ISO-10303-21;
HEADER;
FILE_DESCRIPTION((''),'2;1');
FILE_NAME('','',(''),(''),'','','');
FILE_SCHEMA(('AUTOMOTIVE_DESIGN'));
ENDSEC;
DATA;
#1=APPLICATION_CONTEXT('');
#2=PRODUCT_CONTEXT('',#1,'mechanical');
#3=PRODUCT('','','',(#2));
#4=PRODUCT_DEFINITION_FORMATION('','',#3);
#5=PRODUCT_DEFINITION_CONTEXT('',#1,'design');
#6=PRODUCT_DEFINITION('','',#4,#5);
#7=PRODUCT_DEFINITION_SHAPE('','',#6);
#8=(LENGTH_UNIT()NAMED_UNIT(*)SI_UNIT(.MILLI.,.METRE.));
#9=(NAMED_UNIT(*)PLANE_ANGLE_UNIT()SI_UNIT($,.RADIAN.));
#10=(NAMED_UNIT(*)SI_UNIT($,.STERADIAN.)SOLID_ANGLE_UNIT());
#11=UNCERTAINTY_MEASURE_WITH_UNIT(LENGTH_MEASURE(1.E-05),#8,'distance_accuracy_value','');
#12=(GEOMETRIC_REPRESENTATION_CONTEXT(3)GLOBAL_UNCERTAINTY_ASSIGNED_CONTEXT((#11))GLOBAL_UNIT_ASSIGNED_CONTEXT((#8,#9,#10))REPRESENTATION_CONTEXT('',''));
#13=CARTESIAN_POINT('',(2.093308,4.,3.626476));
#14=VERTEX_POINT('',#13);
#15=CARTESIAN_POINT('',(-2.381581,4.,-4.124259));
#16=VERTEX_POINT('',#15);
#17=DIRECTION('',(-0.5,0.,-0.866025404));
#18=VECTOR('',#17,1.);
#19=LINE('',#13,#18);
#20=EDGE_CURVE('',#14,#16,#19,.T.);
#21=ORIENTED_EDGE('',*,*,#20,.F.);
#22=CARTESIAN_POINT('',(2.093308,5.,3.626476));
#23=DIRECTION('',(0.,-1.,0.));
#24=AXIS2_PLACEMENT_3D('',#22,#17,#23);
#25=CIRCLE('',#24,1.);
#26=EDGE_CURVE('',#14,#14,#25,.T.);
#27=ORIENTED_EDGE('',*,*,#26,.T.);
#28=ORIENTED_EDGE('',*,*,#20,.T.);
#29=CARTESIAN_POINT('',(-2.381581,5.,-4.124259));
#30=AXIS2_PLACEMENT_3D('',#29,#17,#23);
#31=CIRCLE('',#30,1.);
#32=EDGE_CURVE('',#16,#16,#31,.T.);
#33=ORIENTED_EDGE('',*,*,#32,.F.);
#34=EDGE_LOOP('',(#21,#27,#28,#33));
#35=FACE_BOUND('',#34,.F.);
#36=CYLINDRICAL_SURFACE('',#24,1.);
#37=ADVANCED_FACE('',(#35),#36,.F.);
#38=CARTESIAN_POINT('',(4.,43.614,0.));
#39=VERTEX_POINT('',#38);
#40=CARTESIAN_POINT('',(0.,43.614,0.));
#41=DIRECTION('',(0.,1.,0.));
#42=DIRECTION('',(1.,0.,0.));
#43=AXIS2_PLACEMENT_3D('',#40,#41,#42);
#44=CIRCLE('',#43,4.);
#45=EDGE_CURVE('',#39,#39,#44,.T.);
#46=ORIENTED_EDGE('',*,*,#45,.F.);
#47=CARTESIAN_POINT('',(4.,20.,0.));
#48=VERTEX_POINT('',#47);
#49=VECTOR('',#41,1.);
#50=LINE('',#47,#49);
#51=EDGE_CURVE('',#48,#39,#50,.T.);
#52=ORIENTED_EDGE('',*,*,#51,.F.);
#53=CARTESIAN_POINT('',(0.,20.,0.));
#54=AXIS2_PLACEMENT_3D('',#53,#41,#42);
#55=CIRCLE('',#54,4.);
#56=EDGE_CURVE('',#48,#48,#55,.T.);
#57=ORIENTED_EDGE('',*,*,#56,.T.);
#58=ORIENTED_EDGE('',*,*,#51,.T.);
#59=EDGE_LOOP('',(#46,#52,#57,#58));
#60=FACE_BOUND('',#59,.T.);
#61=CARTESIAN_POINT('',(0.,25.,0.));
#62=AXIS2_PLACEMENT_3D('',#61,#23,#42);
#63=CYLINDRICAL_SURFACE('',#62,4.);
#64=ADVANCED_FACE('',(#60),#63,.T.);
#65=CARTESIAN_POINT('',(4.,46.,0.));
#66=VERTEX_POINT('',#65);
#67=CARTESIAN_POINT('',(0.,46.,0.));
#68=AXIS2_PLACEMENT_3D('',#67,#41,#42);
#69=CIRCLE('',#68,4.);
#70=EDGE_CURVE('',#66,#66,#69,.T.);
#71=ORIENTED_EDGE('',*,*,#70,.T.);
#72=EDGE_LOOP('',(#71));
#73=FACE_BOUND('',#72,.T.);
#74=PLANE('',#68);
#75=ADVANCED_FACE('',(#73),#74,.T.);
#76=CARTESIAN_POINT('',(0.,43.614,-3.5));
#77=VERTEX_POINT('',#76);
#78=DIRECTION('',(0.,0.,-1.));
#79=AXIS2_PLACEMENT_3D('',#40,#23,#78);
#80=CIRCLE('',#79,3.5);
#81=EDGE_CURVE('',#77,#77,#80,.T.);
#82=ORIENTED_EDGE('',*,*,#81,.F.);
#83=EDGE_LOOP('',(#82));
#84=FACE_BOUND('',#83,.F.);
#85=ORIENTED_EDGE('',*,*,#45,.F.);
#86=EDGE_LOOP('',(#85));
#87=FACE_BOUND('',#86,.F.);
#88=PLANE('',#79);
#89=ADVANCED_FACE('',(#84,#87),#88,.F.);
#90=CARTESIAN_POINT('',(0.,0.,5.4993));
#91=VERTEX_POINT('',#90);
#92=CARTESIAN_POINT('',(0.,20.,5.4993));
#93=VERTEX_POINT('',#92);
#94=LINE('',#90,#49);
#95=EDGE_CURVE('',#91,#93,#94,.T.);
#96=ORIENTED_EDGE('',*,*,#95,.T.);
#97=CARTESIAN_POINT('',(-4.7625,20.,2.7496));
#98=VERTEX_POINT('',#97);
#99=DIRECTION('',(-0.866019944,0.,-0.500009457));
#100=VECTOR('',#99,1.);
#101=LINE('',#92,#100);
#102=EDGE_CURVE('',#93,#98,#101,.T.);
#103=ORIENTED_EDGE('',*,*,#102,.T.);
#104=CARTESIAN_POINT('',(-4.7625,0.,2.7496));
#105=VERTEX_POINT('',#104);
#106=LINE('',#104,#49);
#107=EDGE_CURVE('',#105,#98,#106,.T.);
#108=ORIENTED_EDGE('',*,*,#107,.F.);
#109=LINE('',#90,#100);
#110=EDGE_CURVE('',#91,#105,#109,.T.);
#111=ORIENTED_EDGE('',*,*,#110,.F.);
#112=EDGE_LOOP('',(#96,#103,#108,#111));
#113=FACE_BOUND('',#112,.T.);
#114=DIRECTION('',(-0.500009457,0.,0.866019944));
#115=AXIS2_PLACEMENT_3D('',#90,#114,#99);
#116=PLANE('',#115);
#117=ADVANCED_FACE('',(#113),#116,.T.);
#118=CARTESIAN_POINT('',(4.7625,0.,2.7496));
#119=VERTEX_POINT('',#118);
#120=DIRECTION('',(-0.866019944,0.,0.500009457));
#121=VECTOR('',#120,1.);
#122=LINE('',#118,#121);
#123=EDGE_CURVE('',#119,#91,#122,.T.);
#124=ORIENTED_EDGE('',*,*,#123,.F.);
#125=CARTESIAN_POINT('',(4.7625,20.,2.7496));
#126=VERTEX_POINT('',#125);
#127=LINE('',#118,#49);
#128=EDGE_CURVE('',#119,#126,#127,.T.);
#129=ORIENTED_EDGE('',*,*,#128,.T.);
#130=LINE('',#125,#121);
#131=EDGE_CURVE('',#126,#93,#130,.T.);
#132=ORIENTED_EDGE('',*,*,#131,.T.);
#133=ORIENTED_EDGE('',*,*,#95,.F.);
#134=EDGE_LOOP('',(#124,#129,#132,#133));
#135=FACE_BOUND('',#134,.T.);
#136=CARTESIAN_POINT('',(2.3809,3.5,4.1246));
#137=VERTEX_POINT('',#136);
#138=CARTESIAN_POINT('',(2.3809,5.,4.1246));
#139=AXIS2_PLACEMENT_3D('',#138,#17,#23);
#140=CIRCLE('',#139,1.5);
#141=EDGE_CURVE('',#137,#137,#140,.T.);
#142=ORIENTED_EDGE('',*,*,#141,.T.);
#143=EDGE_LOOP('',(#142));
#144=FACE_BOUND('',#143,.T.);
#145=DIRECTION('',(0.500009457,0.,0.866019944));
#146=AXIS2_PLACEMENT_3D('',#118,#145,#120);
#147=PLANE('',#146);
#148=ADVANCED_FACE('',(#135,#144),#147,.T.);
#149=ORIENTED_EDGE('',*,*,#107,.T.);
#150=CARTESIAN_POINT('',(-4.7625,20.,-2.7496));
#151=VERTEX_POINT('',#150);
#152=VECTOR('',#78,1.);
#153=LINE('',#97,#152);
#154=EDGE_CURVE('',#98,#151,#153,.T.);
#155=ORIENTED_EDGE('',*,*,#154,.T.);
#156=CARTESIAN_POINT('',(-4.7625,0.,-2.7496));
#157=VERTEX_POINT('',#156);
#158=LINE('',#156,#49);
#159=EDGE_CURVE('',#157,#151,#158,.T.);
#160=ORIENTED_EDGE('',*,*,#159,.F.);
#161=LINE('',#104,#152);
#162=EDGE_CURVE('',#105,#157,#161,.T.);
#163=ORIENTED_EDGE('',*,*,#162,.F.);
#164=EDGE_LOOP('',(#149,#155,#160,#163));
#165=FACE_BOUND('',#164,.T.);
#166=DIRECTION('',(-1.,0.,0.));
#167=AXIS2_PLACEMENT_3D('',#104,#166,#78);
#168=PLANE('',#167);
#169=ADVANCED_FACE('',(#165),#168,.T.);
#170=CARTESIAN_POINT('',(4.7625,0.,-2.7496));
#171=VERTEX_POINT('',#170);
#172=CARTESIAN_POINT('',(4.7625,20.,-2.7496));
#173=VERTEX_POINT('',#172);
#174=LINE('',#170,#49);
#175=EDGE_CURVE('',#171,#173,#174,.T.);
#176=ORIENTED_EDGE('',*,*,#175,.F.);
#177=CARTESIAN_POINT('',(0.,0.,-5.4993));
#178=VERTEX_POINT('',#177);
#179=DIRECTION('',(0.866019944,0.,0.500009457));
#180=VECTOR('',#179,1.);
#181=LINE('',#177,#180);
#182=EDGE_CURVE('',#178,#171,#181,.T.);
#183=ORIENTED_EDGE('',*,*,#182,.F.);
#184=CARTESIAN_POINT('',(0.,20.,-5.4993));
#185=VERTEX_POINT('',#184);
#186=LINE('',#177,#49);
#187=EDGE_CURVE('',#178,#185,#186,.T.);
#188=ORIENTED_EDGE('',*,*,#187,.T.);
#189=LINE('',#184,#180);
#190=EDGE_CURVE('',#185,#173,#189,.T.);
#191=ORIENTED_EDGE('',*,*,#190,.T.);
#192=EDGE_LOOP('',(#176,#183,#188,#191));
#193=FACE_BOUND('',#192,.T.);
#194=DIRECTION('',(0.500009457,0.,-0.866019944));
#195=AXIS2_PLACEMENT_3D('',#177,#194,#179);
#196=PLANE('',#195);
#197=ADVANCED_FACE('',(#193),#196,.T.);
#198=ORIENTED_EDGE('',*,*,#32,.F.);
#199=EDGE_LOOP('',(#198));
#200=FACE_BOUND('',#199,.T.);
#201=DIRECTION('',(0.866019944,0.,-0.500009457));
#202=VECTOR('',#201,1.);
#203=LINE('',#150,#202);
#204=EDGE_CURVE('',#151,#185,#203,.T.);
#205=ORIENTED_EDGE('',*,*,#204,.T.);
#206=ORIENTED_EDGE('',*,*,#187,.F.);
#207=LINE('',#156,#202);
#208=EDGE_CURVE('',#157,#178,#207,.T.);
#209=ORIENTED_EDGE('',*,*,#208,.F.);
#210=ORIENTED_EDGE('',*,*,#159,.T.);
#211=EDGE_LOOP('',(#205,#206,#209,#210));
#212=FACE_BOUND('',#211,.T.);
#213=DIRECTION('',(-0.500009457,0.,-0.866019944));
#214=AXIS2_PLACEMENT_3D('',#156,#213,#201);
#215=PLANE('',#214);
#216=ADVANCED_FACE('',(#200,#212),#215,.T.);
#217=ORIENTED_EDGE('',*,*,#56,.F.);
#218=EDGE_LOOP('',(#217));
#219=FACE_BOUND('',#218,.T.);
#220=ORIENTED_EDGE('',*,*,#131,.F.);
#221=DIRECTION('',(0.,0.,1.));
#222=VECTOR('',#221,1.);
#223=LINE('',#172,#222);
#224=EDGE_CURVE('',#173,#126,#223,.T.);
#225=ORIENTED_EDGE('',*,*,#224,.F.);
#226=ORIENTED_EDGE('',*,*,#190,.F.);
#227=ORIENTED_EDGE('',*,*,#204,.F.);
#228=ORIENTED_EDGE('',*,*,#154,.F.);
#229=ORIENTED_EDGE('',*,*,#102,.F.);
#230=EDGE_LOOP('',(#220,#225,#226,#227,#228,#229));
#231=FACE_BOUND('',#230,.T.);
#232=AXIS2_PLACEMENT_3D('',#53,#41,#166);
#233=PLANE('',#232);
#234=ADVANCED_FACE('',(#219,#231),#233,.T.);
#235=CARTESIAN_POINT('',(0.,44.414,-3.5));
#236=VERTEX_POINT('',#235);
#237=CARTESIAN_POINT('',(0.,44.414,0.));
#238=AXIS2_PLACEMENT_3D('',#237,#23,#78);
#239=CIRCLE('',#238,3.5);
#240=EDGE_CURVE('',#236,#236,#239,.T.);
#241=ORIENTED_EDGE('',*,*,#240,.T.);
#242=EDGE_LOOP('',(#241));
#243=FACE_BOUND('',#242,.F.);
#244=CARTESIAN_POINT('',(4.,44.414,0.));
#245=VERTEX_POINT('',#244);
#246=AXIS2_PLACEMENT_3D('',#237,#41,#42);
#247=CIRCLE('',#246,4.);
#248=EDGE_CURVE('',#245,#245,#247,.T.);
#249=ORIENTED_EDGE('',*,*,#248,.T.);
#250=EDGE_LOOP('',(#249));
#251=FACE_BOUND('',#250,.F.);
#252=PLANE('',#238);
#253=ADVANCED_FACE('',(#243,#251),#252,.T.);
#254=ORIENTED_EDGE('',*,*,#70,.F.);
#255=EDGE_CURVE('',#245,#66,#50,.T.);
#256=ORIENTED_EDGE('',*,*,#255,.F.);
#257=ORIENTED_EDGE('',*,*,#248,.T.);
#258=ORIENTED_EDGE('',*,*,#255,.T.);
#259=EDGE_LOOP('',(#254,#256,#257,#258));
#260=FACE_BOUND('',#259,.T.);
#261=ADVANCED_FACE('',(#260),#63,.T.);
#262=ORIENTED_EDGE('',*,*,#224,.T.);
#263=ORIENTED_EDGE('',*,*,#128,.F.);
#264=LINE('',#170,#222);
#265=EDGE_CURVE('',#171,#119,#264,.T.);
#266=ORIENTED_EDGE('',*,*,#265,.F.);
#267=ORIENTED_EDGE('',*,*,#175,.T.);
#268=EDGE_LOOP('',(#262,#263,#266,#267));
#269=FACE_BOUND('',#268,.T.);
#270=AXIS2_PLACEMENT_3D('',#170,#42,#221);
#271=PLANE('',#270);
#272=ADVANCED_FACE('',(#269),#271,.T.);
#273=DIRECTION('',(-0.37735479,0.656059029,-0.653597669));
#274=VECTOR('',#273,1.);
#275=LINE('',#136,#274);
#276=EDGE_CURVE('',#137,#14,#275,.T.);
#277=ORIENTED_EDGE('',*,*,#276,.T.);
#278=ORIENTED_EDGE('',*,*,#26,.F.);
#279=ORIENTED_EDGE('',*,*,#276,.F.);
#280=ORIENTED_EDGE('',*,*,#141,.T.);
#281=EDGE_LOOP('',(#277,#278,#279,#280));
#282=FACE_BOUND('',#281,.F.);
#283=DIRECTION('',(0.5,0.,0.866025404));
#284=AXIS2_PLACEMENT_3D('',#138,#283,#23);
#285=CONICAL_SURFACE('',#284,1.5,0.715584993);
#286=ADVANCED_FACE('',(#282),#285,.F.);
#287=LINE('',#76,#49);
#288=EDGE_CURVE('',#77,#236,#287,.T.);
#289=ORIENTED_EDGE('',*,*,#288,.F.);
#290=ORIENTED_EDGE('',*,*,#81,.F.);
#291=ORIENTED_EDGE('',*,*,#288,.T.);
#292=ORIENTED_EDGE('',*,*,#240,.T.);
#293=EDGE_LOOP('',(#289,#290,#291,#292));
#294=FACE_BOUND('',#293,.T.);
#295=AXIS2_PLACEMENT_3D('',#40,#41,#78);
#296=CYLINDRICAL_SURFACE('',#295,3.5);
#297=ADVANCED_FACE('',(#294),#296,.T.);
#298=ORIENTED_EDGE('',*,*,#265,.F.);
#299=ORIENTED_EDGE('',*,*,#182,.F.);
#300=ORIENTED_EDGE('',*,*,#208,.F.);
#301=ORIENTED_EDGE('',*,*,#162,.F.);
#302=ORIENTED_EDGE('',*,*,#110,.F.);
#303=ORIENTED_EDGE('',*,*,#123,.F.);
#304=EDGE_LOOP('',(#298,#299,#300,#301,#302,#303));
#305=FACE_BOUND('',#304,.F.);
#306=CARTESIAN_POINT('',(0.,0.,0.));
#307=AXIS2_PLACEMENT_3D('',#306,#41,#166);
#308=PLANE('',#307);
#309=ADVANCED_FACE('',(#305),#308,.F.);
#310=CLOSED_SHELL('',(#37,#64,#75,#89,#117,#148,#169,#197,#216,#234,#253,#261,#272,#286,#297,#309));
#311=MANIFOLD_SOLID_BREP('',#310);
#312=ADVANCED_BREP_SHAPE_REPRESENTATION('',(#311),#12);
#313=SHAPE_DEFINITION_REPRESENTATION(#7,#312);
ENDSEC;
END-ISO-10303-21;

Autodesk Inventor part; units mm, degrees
ref_plane "YZ Plane" through (0, 0, 0) normal (1, 0, 0) x (0, 1, 0)
ref_plane "XZ Plane" through (0, 0, 0) normal (0, 1, 0) x (-1, 0, 0)
ref_plane "XY Plane" through (0, 0, 0) normal (0, 0, 1) x (1, 0, 0)
sketch "Sketch1" plane through (0, 0, 0) normal (0, 1, 0) x (-1, 0, 0)
  line L0 (0, -5.4993) -> (-4.7625, -2.7496)
  line L1 (-4.7625, -2.7496) -> (-4.7625, 2.7496)
  line L2 (-4.7625, 2.7496) -> (0, 5.4993)
  line L3 (0, 5.4993) -> (4.7625, 2.7496)
  line L4 (4.7625, 2.7496) -> (4.7625, -2.7496)
  line L5 (4.7625, -2.7496) -> (0, -5.4993)
  point P0 (0, 0)
  point P1 (0, 0)
  dimension "d0" = 9.525
extrude "Extrusion1" add sketch "Sketch1" along normal blind 20
sketch "Sketch2" plane through (0, 20, 0) normal (0, 1, 0) x (1, 0, 0)
  circle A0 centre (0, 0) radius 4
  dimension "d3" = 8
extrude "Extrusion2" add sketch "Sketch2" along normal blind 5
sketch "Sketch4" plane through (4.7625, 0, 2.7496) normal (0.5, 0, 0.8660254) x (0.8660254, 0, -0.5)
  line L0 (-5.4993, 0) -> (0, 0) projected
  line L1 (0, 0) -> (0, 20) projected
  point P0 (-2.7496, 0)
  point P1 (-2.75, 5)
  dimension "d13" = 5
  dimension "d21" = 2.75
hole "Hole1" at (2.3809, 5, 4.1246) direction (-0.5, 0, -0.8660254) diameter 2 end through all countersink diameter 3 countersink angle 82
sketch "Sketch5" plane through (0, 25, 0) normal (0, 1, 0) x (1, 0, 0)
  circle A0 centre (0, 0) radius 4 projected
  circle A1 centre (0, 0) radius 4
extrude "Extrusion4" add sketch "Sketch5" along normal blind 21
sketch "Sketch6" plane through (0, 0, 0) normal (1, 0, 0) x (0, 1, 0)
  line L0 (20, -4) -> (46, -4) projected
  line L1 (44.414, -4) -> (43.614, -4)
  line L2 (43.614, -4) -> (43.614, -3.5)
  line L3 (43.614, -3.5) -> (44.414, -3.5)
  line L4 (44.414, -3.5) -> (44.414, -4)
  line L5 (46, -4) -> (46, 4) projected
  line L6 (46, 0) -> (35.8513, 0)
  point P0 (0, 0)
  dimension "d24" = 2.386
  dimension "d25" = 0.8
  dimension "d26" = 7
revolve "Revolution1" cut sketch "Sketch6" angle 360 about axis through (0, 46, 0) along (0, -1, 0)
properties part number "bevel gear shaft connector for versaball" material "Steel"
